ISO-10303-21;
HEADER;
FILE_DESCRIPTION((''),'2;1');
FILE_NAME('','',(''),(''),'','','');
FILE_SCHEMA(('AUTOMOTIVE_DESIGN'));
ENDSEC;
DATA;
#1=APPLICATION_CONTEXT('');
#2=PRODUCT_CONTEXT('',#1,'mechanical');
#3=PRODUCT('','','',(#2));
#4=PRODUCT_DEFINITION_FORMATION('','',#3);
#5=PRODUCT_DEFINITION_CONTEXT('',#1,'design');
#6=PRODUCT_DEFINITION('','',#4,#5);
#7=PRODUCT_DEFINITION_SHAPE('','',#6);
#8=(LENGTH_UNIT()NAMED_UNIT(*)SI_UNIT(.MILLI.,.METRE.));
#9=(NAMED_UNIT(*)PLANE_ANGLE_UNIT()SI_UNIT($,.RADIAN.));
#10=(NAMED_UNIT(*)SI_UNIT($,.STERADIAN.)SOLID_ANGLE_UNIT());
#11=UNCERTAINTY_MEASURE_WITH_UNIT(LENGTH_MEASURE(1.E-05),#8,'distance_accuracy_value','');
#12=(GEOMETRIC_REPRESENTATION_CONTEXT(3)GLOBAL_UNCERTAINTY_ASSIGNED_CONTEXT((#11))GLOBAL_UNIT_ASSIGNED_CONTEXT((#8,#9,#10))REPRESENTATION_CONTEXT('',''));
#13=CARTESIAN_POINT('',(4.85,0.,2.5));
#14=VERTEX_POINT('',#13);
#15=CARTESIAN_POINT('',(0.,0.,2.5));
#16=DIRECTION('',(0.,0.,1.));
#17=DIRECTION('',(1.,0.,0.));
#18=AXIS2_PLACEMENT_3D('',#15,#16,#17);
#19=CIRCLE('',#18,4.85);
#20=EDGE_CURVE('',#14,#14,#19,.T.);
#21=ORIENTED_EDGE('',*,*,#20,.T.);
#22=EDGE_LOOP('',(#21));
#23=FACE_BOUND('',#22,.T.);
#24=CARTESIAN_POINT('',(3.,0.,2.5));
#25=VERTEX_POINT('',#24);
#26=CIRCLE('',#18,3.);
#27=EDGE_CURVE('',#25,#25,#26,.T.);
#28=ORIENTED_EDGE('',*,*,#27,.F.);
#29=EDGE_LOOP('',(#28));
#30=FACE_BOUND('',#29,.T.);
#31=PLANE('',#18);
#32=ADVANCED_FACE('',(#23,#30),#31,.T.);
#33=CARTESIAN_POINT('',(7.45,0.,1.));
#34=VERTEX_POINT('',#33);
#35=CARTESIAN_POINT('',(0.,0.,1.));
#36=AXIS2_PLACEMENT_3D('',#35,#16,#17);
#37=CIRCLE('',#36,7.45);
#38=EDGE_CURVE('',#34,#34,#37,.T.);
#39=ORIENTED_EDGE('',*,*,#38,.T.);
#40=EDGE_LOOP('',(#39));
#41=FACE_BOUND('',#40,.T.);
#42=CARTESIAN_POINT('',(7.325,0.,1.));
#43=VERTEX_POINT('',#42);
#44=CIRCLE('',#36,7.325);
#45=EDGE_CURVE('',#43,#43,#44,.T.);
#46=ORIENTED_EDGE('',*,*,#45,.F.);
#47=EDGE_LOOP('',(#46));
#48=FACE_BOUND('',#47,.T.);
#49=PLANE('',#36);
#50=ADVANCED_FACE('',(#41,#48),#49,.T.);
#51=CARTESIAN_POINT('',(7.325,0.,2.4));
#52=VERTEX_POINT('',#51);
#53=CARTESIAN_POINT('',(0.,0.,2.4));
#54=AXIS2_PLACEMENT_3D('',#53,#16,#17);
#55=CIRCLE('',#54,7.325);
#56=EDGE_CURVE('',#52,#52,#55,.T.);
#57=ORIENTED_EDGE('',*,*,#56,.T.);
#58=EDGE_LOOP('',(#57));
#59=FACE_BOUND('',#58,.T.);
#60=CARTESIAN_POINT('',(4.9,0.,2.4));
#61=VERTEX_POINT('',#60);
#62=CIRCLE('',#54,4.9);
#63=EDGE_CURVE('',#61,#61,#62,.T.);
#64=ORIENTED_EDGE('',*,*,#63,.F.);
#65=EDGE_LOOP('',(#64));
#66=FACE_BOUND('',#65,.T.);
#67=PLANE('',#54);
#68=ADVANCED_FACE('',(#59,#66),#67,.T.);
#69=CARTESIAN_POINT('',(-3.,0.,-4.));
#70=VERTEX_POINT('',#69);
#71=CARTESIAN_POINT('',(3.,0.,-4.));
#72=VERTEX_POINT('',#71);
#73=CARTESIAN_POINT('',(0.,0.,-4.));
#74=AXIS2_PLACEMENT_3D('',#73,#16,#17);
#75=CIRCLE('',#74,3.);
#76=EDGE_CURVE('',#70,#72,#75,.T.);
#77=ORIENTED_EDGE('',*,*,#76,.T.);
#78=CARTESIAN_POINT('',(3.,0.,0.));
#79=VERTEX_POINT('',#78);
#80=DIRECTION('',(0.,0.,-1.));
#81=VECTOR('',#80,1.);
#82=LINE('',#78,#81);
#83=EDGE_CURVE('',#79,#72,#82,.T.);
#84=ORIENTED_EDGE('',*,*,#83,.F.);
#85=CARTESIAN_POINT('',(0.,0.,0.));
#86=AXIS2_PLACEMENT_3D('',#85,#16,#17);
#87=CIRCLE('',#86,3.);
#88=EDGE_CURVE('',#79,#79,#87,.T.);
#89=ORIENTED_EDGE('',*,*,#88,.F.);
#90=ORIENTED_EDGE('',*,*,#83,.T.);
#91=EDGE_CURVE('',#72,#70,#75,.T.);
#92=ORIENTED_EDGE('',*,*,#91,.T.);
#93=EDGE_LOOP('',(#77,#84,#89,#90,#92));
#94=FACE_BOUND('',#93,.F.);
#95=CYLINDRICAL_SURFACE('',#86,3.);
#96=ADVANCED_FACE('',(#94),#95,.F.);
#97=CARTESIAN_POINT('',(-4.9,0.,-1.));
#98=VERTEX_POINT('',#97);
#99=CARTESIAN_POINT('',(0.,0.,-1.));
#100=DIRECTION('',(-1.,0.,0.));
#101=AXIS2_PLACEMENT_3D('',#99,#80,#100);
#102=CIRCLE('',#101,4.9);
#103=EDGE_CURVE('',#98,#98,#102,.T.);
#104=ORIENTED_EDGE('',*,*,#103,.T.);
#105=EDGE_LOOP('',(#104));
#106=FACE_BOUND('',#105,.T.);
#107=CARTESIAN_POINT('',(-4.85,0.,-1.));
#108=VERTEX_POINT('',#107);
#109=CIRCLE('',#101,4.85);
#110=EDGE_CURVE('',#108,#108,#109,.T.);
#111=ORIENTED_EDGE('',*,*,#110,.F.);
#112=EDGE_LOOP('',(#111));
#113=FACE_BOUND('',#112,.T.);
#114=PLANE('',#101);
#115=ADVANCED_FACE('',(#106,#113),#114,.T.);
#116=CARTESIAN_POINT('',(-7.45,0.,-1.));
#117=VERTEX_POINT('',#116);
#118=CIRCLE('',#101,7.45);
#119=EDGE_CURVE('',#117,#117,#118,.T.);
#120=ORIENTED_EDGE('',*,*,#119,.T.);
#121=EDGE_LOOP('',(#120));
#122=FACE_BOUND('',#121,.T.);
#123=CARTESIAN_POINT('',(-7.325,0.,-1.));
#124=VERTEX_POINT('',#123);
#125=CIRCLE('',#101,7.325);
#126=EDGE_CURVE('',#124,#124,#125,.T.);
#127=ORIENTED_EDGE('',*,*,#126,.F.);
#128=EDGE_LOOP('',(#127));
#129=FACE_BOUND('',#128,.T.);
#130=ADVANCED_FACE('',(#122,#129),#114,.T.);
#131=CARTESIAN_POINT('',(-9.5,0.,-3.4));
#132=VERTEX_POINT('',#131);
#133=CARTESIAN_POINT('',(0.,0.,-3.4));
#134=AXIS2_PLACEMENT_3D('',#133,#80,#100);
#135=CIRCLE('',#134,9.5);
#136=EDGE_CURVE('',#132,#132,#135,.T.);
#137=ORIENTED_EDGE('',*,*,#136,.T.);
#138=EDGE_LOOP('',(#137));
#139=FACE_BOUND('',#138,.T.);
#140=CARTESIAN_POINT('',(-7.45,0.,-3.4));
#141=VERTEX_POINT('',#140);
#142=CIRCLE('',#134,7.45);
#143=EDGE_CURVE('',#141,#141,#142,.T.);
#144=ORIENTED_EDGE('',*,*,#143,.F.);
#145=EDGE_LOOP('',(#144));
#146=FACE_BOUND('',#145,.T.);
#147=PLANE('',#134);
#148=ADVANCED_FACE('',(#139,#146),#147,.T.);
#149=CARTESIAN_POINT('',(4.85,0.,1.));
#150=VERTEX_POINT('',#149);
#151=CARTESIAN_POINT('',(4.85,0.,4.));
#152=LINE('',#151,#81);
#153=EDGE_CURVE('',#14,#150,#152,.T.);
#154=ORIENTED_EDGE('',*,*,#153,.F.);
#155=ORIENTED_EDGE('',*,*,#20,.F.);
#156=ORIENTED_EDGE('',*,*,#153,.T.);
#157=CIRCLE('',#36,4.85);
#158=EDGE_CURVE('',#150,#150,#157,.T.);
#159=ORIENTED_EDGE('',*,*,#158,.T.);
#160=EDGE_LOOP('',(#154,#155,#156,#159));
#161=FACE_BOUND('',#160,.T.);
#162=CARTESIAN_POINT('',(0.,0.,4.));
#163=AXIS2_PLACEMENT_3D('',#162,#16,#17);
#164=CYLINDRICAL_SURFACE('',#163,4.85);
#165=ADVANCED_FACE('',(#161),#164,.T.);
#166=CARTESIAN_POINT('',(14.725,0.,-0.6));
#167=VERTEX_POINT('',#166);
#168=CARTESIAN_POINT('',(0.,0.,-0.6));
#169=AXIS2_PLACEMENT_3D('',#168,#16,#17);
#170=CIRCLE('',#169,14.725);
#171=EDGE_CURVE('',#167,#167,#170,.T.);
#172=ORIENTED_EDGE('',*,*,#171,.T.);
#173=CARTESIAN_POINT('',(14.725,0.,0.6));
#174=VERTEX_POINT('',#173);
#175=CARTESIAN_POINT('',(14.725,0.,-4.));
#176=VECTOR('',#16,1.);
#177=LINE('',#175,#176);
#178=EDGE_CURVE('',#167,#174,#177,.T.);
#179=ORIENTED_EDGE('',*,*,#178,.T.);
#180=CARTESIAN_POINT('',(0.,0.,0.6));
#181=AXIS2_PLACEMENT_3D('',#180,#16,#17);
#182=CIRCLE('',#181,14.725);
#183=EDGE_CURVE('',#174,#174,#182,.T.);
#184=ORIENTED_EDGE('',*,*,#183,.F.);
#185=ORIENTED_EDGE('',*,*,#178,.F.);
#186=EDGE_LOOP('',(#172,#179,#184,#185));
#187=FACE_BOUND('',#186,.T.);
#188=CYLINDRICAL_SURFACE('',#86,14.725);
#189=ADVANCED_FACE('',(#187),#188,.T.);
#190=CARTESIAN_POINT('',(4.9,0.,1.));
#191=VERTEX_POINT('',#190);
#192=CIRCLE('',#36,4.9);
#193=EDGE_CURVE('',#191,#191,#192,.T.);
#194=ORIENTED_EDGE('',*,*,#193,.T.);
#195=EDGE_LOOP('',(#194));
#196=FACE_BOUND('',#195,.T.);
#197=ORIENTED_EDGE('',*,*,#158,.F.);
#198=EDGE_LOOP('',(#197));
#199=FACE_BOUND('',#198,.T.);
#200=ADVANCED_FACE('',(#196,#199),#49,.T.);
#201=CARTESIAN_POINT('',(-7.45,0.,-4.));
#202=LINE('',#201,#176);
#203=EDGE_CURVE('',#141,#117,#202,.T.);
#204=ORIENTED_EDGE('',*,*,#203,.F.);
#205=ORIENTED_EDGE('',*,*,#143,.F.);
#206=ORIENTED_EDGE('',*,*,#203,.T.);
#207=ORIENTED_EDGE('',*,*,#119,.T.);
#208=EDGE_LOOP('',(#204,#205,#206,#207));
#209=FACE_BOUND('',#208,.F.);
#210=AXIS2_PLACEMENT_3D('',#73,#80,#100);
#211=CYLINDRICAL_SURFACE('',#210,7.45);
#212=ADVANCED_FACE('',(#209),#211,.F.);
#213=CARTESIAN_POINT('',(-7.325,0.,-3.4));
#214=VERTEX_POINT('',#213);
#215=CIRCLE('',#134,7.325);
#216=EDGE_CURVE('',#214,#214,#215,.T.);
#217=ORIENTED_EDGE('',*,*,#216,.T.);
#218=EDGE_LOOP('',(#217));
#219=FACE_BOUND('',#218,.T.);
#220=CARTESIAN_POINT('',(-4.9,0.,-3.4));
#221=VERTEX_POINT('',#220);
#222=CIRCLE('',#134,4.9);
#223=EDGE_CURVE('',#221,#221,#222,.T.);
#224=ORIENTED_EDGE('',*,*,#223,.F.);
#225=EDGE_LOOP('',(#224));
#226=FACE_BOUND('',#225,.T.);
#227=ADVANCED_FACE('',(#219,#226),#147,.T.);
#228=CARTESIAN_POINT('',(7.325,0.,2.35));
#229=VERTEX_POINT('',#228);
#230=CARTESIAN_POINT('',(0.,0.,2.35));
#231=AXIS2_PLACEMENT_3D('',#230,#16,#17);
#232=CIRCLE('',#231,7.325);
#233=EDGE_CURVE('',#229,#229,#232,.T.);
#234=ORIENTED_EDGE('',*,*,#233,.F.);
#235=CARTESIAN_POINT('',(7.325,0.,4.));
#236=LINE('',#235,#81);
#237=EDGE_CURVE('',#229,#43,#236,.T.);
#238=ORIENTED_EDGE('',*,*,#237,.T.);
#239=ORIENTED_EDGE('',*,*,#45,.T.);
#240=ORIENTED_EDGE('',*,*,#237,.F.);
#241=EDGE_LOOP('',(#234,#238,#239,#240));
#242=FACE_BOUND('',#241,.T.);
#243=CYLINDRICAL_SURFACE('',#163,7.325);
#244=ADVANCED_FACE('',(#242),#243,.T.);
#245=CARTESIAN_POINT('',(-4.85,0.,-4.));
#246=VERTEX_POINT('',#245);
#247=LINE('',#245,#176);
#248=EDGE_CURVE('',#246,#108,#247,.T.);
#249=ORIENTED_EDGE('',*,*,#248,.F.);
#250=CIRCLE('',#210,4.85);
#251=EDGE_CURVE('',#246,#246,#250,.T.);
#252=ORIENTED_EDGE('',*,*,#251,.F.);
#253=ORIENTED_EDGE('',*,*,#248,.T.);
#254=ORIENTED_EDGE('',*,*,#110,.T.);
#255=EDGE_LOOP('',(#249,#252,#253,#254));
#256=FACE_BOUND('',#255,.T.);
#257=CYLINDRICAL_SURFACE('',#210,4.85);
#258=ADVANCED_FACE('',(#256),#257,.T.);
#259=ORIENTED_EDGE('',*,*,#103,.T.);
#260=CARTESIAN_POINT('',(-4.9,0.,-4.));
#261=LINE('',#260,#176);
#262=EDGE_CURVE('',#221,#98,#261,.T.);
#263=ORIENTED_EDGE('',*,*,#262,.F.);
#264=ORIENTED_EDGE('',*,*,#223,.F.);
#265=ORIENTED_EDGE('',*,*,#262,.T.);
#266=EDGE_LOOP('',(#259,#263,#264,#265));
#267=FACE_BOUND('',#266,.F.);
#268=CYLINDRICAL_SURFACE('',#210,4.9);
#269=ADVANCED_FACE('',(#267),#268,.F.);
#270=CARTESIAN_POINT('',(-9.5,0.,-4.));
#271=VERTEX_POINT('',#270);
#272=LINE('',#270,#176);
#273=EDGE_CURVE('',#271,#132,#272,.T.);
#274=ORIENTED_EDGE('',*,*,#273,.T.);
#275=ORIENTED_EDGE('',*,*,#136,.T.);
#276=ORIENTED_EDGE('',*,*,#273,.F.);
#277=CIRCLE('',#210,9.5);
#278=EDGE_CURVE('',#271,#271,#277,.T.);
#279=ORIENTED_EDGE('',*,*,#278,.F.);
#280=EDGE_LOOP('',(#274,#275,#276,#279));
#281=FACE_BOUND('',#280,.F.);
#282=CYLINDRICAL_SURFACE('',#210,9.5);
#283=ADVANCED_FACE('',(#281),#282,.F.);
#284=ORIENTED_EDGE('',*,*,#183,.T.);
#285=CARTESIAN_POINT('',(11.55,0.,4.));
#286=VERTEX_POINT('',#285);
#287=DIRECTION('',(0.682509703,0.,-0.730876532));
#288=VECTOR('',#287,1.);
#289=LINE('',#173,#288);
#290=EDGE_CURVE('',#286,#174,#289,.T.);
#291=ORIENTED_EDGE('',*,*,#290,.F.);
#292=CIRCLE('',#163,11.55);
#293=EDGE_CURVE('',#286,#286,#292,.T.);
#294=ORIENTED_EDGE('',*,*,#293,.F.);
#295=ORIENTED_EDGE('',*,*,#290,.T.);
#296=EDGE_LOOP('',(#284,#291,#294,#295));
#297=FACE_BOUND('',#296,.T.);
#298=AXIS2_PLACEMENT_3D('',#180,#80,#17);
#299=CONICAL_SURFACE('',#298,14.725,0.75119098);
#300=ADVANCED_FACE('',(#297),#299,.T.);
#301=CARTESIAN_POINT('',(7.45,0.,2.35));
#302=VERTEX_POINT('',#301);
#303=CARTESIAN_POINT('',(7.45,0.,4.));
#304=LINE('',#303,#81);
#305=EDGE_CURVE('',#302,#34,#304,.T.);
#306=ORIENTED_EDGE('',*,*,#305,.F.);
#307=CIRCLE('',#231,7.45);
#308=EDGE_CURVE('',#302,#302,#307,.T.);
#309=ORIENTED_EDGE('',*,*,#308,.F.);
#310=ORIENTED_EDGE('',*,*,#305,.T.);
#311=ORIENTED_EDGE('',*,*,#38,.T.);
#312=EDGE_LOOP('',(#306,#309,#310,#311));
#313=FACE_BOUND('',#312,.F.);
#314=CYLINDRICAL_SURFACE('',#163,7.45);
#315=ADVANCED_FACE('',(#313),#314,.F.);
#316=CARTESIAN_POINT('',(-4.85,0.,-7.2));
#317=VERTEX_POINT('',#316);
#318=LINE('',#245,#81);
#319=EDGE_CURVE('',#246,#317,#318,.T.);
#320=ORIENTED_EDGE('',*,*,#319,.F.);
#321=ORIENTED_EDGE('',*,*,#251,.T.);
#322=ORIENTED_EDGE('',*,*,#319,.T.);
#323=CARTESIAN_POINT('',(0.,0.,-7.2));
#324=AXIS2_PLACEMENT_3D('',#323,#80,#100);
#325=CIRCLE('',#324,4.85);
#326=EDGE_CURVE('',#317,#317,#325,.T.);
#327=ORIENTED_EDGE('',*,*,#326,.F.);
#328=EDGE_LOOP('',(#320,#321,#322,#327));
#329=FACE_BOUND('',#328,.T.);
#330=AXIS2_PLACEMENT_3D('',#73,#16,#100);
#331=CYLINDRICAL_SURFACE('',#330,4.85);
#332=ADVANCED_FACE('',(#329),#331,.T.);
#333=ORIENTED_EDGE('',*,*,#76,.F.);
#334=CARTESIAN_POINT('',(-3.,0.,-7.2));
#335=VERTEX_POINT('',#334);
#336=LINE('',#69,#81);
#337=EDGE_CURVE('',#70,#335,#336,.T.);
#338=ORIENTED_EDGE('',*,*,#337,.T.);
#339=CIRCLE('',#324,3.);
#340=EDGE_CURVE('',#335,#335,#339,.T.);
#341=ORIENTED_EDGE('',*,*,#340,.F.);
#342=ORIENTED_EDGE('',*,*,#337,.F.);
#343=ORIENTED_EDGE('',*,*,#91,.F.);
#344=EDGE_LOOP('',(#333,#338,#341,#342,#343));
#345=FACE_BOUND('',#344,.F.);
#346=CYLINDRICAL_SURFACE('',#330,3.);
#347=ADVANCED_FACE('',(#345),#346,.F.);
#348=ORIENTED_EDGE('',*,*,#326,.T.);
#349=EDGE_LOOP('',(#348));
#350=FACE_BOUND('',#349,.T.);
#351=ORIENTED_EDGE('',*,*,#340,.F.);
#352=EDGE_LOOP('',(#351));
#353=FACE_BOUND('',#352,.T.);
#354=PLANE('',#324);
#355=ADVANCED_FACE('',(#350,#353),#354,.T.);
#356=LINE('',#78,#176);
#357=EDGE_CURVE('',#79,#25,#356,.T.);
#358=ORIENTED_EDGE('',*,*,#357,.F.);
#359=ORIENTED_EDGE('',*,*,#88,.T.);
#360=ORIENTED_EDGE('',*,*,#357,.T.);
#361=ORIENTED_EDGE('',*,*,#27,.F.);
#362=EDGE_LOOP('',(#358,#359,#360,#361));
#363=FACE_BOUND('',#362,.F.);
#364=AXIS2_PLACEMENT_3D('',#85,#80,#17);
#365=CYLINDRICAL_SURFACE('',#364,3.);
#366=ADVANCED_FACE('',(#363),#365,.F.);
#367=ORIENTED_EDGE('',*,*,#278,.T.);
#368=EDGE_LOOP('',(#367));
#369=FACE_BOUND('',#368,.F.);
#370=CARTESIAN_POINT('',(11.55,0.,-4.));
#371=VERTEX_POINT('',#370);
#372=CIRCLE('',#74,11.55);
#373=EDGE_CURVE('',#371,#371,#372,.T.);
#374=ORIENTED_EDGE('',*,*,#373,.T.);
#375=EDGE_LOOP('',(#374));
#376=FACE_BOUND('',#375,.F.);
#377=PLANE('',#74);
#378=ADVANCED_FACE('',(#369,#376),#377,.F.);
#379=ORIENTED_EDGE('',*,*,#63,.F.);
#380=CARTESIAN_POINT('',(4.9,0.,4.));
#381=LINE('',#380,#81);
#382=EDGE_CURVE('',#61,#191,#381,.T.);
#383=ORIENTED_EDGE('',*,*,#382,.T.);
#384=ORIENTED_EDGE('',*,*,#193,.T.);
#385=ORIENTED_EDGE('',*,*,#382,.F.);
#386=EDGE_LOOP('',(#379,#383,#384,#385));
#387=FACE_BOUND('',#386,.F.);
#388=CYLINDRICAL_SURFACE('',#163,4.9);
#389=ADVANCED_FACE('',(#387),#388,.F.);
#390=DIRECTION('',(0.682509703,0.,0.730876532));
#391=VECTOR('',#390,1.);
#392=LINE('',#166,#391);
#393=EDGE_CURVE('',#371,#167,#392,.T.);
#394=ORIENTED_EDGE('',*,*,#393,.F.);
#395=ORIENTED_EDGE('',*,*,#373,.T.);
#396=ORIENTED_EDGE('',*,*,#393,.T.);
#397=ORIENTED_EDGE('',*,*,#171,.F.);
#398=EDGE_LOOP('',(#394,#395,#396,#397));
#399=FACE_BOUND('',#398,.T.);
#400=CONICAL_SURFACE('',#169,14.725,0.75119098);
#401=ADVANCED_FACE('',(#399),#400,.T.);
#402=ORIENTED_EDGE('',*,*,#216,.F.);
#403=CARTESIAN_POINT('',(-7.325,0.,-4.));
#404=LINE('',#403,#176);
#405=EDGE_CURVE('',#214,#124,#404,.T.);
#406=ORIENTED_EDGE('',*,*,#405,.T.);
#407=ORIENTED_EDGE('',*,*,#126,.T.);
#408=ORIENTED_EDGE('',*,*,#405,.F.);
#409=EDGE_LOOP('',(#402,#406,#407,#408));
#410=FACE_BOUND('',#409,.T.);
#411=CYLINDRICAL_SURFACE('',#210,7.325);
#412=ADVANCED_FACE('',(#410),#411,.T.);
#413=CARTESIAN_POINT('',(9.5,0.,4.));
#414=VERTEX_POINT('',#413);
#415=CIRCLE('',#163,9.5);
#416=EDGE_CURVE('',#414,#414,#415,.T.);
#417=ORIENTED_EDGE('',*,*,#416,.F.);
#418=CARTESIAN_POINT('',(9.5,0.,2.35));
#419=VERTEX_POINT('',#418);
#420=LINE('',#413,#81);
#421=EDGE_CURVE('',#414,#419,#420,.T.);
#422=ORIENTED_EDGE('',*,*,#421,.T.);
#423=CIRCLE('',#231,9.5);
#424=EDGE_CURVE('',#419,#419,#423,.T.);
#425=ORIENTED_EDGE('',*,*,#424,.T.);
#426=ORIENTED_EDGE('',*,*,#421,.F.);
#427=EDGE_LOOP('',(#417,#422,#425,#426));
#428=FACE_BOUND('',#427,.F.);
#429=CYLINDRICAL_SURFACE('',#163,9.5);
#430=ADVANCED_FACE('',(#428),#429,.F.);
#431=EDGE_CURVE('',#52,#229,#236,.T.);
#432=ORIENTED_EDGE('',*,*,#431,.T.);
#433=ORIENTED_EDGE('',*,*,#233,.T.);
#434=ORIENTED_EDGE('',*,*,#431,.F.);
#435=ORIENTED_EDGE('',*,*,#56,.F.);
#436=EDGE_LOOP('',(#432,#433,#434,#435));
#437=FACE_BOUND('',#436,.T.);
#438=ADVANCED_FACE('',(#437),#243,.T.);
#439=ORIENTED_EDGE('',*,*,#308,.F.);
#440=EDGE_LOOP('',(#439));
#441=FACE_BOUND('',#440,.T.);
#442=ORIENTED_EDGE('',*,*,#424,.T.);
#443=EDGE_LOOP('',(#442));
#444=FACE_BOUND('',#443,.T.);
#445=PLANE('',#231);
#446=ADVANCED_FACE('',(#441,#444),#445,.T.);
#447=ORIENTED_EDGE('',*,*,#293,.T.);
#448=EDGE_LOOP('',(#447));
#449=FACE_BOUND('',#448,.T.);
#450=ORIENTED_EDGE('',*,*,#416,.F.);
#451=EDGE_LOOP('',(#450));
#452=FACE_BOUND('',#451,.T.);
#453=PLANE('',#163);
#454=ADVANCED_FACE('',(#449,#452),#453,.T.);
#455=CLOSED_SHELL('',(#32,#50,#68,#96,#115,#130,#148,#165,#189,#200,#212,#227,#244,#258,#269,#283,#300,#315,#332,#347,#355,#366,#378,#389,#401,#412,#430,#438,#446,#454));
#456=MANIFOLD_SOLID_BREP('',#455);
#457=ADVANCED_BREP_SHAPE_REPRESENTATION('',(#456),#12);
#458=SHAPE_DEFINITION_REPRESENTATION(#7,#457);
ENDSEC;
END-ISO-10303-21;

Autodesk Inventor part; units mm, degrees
ref_plane "YZ Plane" through (0, 0, 0) normal (1, 0, 0) x (0, 1, 0)
ref_plane "XZ Plane" through (0, 0, 0) normal (0, 1, 0) x (-1, 0, 0)
ref_plane "XY Plane" through (0, 0, 0) normal (0, 0, 1) x (1, 0, 0)
sketch "Skizze1" plane through (0, 0, 0) normal (0, 0, 1) x (1, 0, 0)
  circle A0 centre (0, 0) radius 3
  circle A1 centre (0, 0) radius 14.725
  dimension "d0" = 6
  dimension "d1" = 29.45
extrude "Extrusion1" add sketch "Skizze1" along normal mid plane 8
sketch "Skizze2" plane through (0, 0, 4) normal (0, 0, 1) x (1, 0, 0)
  circle A0 centre (0, 0) radius 3 projected
  circle A1 centre (0, 0) radius 14.725 projected
  circle A2 centre (0, 0) radius 4.85
  circle A3 centre (0, 0) radius 4.9
  circle A4 centre (0, 0) radius 7.325
  circle A5 centre (0, 0) radius 9.5
  circle A6 centre (0, 0) radius 7.45
  dimension "d4" = 9.7
  dimension "d5" = 9.8
  dimension "d6" = 14.65
  dimension "d7" = 19
  dimension "d16" = 14.9
extrude "Extrusion2" cut sketch "Skizze2" against normal blind 1.5 contours A2
extrude "Extrusion3" cut sketch "Skizze2" against normal blind 1.6 contours A4
extrude "Extrusion4" cut sketch "Skizze2" against normal blind 1.65 contours A5 | A6
extrude "Extrusion5" cut sketch "Skizze2" against normal blind 3 contours A3
extrude "Extrusion6" cut sketch "Skizze2" against normal blind 3 contours A6
sketch "Skizze4" plane through (0, 0, -4) normal (0, 0, -1) x (-1, 0, 0)
  circle A0 centre (0, 0) radius 3 projected
  circle A1 centre (0, 0) radius 14.725 projected
  circle A2 centre (0, 0) radius 4.9 projected
  circle A3 centre (0, 0) radius 7.45 projected
  circle A4 centre (0, 0) radius 7.325 projected
  circle A5 centre (0, 0) radius 9.5 projected
  circle A6 centre (0, 0) radius 4.85 projected
extrude "Extrusion7" add sketch "Skizze4" along normal blind 3.2 contours A6
extrude "Extrusion8" cut sketch "Skizze4" against normal blind 3 contours A2
extrude "Extrusion9" cut sketch "Skizze4" against normal blind 0.6 contours A4
extrude "Extrusion10" cut sketch "Skizze4" against normal blind 3 contours A3
extrude "Extrusion11" cut sketch "Skizze4" against normal blind 0.6 contours A5
chamfer "Fase1" distance 3.175 distance2 3.4 1 edges at (-14.725, 0, -4)
chamfer "Fase2" distance 3.175 distance2 3.4 1 edges at (-14.725, 0, 4) measured on face at (12.7487, -1.9325, 4)
properties part number "Mauro_White_Wheel"
